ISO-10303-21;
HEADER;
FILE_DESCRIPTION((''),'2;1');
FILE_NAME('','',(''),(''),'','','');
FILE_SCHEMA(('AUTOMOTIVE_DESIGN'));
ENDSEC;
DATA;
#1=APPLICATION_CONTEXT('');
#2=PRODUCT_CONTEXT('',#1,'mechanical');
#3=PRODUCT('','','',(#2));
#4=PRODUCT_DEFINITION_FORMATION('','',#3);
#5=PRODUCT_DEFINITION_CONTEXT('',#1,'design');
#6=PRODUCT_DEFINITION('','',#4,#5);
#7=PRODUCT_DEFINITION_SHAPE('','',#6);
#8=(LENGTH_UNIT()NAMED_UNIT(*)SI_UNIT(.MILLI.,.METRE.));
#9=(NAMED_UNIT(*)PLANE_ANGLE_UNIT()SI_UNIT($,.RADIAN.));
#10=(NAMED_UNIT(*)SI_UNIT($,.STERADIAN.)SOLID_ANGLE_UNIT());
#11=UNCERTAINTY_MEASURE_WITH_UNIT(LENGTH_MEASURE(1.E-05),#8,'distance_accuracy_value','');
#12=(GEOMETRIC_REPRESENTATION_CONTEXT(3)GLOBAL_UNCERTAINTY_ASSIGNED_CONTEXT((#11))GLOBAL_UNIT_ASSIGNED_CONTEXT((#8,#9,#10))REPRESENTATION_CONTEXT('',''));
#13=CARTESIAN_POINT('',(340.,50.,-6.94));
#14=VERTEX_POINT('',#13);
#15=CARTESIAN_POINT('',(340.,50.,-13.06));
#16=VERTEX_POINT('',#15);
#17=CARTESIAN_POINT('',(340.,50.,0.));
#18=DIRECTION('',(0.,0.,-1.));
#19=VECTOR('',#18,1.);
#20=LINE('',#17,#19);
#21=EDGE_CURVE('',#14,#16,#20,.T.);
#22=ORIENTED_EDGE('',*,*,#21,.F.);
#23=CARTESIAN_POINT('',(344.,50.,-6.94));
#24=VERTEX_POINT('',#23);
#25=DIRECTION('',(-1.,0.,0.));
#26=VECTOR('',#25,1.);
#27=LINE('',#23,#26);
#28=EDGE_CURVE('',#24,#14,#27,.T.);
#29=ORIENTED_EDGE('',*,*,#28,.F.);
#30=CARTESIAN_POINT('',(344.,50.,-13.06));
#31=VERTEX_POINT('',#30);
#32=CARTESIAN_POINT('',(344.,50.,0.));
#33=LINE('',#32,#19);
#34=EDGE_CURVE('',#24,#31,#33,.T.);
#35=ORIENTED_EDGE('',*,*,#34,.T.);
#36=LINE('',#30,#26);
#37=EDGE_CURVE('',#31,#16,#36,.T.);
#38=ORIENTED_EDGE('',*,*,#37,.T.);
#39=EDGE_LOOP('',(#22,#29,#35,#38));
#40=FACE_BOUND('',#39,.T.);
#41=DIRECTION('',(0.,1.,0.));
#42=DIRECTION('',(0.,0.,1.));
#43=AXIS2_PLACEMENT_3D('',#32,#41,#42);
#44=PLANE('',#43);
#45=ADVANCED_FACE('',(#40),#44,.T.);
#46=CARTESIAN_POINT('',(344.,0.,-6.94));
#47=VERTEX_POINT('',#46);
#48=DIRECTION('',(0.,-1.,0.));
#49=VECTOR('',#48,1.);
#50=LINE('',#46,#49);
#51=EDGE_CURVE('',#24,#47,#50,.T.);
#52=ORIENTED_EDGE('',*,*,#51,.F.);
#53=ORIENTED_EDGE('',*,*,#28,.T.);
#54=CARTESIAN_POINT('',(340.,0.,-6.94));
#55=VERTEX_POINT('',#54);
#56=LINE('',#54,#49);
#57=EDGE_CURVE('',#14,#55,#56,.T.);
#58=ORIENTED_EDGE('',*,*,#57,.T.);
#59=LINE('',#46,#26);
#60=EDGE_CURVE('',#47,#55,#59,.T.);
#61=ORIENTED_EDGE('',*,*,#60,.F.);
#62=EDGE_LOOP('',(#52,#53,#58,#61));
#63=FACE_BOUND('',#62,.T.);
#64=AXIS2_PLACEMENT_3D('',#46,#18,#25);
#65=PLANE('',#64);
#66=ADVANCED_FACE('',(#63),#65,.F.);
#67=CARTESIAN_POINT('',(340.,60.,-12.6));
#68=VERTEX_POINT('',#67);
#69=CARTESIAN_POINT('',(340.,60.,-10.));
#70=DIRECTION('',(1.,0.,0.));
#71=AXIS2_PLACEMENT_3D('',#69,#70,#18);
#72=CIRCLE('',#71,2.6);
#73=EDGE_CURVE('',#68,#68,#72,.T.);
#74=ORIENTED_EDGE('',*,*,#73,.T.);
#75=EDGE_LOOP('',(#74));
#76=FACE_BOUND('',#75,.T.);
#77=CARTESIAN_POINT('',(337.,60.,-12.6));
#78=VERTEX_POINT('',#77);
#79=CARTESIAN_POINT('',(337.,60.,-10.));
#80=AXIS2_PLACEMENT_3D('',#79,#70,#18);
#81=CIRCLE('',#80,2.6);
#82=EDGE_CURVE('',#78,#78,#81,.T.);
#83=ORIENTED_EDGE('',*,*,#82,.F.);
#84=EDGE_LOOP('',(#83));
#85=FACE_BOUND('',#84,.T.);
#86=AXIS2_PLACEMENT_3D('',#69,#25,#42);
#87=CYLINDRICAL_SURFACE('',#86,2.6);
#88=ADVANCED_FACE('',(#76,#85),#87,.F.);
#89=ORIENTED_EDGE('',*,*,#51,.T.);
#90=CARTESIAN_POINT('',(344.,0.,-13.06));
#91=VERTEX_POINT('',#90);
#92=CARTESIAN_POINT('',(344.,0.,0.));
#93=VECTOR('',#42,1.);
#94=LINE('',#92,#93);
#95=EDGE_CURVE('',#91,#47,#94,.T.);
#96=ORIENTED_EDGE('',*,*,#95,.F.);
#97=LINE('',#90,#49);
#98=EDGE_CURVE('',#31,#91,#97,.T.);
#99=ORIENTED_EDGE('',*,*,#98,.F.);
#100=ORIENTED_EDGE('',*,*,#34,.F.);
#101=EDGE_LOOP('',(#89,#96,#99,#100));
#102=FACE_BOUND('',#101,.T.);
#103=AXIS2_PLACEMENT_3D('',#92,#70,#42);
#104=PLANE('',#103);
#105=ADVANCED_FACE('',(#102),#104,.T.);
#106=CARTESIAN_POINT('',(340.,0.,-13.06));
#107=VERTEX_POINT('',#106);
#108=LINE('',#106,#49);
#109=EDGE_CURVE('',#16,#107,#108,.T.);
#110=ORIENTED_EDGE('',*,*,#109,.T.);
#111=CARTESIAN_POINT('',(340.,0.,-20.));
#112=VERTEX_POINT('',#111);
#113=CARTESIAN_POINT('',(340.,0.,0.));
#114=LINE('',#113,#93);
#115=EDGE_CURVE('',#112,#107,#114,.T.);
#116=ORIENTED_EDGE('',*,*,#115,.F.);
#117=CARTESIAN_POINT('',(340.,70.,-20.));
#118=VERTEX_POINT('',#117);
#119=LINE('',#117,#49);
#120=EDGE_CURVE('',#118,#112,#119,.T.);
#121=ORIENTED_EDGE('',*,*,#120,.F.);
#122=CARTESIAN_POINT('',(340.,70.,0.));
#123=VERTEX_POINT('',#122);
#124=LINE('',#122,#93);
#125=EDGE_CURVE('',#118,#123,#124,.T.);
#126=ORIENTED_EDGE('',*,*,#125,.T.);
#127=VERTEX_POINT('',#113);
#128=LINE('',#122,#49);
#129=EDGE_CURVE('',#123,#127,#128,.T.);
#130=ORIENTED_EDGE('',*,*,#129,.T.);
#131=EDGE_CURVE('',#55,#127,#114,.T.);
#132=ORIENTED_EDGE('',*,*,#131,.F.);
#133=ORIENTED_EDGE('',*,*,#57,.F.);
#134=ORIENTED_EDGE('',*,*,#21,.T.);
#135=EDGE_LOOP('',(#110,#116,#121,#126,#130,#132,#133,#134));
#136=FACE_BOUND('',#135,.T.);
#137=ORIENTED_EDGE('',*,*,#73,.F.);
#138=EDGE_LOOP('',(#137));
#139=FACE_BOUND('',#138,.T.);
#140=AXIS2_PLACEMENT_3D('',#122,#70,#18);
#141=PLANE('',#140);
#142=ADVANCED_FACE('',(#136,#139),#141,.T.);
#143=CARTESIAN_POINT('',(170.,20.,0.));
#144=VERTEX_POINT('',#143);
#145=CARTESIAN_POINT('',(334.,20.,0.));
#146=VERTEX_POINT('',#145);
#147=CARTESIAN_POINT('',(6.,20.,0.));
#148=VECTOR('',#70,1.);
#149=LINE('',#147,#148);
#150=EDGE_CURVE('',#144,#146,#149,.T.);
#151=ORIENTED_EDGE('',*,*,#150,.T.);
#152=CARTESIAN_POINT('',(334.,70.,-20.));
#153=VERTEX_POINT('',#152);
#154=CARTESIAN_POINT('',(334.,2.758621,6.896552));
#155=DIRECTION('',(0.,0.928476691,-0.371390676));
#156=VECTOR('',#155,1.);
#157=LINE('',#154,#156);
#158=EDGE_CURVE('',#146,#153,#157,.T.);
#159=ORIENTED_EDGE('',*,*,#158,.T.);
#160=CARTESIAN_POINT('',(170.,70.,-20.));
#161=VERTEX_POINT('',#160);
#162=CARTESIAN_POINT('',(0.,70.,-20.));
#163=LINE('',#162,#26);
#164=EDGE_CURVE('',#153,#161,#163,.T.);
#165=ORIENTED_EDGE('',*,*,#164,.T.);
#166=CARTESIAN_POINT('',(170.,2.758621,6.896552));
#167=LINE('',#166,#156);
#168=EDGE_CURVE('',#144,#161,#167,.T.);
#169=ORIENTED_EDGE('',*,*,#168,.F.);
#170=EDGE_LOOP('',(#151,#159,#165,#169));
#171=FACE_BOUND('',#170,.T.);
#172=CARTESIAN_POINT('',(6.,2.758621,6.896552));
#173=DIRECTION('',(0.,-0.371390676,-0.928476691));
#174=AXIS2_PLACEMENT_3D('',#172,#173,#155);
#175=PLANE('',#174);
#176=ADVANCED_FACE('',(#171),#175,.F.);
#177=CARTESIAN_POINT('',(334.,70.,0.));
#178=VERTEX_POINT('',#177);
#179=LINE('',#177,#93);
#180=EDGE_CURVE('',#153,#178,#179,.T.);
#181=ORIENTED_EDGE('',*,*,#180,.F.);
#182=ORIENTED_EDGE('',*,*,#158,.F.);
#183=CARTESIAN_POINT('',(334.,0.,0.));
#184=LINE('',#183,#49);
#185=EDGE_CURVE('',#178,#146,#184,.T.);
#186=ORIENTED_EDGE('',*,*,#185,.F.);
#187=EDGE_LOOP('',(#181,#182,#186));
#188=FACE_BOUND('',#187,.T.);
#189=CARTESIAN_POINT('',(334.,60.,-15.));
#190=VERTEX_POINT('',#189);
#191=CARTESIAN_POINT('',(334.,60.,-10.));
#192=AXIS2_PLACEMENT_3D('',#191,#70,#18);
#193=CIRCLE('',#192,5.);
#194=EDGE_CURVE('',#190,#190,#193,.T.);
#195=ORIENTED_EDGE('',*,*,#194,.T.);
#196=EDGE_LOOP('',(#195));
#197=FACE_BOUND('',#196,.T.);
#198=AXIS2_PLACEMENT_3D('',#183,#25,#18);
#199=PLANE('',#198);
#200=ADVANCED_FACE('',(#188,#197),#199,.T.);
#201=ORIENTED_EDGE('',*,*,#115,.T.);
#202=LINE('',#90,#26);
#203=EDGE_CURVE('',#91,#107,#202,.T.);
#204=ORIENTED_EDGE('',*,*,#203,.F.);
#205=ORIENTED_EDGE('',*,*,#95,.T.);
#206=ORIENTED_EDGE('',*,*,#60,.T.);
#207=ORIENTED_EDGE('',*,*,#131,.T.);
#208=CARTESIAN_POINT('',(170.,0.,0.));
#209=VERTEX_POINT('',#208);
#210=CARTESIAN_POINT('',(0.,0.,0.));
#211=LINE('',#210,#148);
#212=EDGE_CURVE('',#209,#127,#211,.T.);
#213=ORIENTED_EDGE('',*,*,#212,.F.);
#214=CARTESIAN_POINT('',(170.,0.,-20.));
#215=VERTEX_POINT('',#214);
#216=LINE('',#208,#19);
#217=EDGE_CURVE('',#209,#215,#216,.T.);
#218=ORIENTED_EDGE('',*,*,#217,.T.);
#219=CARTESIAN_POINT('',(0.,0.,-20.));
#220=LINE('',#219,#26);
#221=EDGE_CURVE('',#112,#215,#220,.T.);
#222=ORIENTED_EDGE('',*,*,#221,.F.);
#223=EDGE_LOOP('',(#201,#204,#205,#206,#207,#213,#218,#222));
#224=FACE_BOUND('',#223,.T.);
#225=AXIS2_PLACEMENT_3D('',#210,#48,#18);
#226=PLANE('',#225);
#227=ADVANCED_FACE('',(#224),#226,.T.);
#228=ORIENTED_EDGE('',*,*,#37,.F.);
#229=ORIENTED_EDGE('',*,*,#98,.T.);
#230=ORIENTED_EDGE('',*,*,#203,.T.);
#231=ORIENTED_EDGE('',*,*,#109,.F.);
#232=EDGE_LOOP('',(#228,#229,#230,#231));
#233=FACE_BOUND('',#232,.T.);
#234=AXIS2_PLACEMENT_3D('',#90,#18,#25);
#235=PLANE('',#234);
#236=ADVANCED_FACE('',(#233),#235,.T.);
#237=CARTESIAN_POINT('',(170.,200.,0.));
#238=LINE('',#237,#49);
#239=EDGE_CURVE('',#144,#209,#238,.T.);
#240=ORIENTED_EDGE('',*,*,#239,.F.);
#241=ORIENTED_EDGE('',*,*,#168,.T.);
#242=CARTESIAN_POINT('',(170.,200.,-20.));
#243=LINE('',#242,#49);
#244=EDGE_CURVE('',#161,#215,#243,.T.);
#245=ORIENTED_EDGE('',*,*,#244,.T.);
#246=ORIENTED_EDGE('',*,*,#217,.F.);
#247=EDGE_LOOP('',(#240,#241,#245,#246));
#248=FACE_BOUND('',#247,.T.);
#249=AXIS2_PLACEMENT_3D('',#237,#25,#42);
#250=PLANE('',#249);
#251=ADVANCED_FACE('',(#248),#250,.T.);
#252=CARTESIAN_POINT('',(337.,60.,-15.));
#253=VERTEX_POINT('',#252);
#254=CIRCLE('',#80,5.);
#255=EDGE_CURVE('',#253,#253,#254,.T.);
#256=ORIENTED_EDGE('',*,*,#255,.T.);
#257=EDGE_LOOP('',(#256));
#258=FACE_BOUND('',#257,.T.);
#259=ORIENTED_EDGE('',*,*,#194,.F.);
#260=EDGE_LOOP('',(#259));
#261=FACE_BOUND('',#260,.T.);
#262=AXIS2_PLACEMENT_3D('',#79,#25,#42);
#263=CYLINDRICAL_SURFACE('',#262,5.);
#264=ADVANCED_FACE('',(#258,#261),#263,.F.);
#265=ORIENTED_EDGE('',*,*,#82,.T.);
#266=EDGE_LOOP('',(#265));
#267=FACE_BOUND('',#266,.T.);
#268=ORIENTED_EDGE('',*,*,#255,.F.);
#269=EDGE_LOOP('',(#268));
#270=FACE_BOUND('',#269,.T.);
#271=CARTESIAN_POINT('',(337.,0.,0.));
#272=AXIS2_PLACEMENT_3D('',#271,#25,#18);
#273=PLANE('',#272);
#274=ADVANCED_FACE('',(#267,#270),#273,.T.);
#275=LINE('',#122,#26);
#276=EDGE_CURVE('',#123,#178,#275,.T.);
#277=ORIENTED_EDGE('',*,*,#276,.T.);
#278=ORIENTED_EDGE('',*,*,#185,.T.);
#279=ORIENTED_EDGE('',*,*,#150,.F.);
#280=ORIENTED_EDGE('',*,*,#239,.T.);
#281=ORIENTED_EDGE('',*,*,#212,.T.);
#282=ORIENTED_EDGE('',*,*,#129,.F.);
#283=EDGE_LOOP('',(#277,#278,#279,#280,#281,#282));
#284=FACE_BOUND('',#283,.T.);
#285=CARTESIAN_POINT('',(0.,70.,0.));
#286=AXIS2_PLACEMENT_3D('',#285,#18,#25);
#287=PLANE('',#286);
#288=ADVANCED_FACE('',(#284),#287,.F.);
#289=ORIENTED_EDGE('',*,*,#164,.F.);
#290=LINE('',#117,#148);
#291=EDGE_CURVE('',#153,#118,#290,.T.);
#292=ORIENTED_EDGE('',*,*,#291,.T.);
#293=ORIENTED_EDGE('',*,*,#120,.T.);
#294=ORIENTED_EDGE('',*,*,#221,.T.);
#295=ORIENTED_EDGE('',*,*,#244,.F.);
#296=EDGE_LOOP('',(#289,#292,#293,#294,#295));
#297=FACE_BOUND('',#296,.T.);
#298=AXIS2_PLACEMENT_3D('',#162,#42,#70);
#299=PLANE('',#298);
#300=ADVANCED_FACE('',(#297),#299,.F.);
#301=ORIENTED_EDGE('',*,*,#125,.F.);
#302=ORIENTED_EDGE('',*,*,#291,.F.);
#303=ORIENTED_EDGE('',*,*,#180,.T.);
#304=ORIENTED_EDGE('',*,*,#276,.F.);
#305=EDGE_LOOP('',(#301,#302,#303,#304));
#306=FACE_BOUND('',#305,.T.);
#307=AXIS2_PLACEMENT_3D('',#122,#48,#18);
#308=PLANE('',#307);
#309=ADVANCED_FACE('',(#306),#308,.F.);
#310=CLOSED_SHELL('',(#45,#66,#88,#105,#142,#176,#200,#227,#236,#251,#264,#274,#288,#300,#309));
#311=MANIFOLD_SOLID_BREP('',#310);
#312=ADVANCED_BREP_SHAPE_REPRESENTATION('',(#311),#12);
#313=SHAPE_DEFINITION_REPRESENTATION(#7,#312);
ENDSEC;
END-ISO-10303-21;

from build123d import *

# Parameters (mm, degrees)
SKETCH_1_W          = 170
SKETCH_1_H          = 20
EXTRUDE_1_DEPTH     = 70
CUT_EXTRUDE_1_DEPTH = 164
CUT_EXTRUDE_2_DEPTH = 3
SKETCH_4_R          = 2.6
CUT_EXTRUDE_3_DEPTH = 3
SKETCH_5_W          = 6.12
SKETCH_5_H          = 50
EXTRUDE_2_DEPTH     = 4
CUT_EXTRUDE_4_DEPTH = 200


with BuildPart() as part:
    # 草图1 → 凸台-拉伸1 (new body)
    with BuildSketch(Plane(origin=(0, 0, 0), x_dir=(1, 0, 0), z_dir=(0, 1, 0))):
        with Locations((85, 10)):
            Rectangle(SKETCH_1_W, SKETCH_1_H)
    extrude_1 = extrude(amount=EXTRUDE_1_DEPTH)

    # 草图2 → 切除-拉伸1 (cut)
    with BuildSketch(Plane(origin=(170, 0, 0), x_dir=(0, 0, -1), z_dir=(1, 0, 0))):
        Polygon((0, 70), (0, 20), (20, 70), align=None)
    cut_extrude_1 = extrude(amount=-CUT_EXTRUDE_1_DEPTH, mode=Mode.SUBTRACT)

    # 草图3 → 切除-拉伸2 (cut)
    with BuildSketch(Plane(origin=(6, 0, 0), x_dir=(0, 0, -1), z_dir=(1, 0, 0))):
        with BuildLine():
            ThreePointArc((10, 65), (6.464466094, 56.464466094), (15, 60))
            ThreePointArc((15, 60), (13.535533906, 63.535533906), (10, 65))
        make_face()
    cut_extrude_2 = extrude(amount=-CUT_EXTRUDE_2_DEPTH, mode=Mode.SUBTRACT)

    # 草图4 → 切除-拉伸3 (cut)
    with BuildSketch(Plane(origin=(3, 0, 0), x_dir=(0, 0, -1), z_dir=(1, 0, 0))):
        with Locations((10, 60)):
            Circle(SKETCH_4_R)
    cut_extrude_3 = extrude(amount=-CUT_EXTRUDE_3_DEPTH, mode=Mode.SUBTRACT)

    # 草图5 → 凸台-拉伸2 (add)
    with BuildSketch(Plane.ZY):
        with Locations((-10, 25)):
            Rectangle(SKETCH_5_W, SKETCH_5_H)
    extrude_2 = extrude(amount=EXTRUDE_2_DEPTH)

    # 镜向1: 凸台-拉伸1, 切除-拉伸1, 切除-拉伸2, 切除-拉伸3, 凸台-拉伸2 across plane
    add(extrude_1.mirror(Plane(origin=(170, 70, 0), x_dir=(0, 0, 1), z_dir=(-1, 0, 0))))
    add(cut_extrude_1.mirror(Plane(origin=(170, 70, 0), x_dir=(0, 0, 1), z_dir=(-1, 0, 0))), mode=Mode.SUBTRACT)
    add(cut_extrude_2.mirror(Plane(origin=(170, 70, 0), x_dir=(0, 0, 1), z_dir=(-1, 0, 0))), mode=Mode.SUBTRACT)
    add(cut_extrude_3.mirror(Plane(origin=(170, 70, 0), x_dir=(0, 0, 1), z_dir=(-1, 0, 0))), mode=Mode.SUBTRACT)
    add(extrude_2.mirror(Plane(origin=(170, 70, 0), x_dir=(0, 0, 1), z_dir=(-1, 0, 0))))

    # 草图6 → 切除-拉伸4 (cut)
    with BuildSketch(Plane.XZ):
        Polygon((170, 0), (0, 0), (0, -6.94), (-4, -6.94), (-4, -13.06), (0, -13.06), (0, -20), (170, -20), align=None)
    extrude(amount=-CUT_EXTRUDE_4_DEPTH, mode=Mode.SUBTRACT)


solid = part.part
